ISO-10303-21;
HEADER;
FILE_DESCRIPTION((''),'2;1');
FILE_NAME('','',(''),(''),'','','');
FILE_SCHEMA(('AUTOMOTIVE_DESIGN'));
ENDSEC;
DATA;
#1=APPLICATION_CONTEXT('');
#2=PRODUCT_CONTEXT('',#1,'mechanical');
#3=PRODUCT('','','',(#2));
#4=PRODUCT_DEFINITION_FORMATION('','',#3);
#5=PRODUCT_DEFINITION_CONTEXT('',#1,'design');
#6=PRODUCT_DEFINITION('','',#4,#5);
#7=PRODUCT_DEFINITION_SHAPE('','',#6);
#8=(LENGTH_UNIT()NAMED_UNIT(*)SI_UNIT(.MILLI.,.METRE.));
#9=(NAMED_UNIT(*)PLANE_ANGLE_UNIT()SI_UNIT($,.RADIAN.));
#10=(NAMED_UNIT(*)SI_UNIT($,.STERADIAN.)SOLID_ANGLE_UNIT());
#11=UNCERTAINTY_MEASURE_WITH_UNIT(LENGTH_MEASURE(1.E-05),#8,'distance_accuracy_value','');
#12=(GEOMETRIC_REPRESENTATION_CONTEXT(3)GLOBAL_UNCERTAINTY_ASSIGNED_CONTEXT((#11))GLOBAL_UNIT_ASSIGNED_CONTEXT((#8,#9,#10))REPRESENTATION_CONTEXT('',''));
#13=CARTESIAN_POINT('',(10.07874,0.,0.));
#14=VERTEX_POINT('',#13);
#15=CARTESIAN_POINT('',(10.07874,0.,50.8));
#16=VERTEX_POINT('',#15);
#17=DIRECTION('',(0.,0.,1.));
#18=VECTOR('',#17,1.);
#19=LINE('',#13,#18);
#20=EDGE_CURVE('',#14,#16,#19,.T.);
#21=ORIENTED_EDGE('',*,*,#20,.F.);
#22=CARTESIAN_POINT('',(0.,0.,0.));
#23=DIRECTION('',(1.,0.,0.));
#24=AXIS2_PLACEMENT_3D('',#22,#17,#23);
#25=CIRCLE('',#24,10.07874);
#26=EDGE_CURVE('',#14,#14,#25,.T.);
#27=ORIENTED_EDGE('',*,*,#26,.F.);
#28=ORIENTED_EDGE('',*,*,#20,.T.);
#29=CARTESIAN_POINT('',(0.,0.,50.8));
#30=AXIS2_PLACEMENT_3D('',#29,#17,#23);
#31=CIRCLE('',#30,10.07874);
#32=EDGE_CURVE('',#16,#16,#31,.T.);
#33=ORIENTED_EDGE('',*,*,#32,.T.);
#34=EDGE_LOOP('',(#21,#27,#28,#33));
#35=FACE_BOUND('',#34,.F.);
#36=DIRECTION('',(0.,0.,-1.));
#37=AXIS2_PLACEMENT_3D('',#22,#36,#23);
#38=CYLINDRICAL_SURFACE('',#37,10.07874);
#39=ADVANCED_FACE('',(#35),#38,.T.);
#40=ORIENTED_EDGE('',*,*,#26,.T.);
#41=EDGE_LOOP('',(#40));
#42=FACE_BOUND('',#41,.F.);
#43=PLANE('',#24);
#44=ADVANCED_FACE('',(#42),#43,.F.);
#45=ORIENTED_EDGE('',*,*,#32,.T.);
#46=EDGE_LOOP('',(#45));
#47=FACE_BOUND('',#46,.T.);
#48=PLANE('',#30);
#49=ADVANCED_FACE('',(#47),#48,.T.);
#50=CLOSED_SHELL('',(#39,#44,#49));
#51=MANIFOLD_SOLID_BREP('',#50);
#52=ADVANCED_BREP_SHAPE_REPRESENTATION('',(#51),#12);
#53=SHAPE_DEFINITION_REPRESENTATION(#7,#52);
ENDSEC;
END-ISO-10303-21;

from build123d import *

# Parameters (mm, degrees)
F0_R     = 10.0787403768
F2_DEPTH = 50.8


# Not quite as in the source:
# - a variable given as a bare number and used for a length is read in inches; the dataset says mm whatever the document's units were


with BuildPart() as f2:
    # F0 (on Top) → F2 (new body)
    with BuildSketch(Plane.XY):
        Circle(F0_R)
    extrude(amount=F2_DEPTH)


solid = f2.part
